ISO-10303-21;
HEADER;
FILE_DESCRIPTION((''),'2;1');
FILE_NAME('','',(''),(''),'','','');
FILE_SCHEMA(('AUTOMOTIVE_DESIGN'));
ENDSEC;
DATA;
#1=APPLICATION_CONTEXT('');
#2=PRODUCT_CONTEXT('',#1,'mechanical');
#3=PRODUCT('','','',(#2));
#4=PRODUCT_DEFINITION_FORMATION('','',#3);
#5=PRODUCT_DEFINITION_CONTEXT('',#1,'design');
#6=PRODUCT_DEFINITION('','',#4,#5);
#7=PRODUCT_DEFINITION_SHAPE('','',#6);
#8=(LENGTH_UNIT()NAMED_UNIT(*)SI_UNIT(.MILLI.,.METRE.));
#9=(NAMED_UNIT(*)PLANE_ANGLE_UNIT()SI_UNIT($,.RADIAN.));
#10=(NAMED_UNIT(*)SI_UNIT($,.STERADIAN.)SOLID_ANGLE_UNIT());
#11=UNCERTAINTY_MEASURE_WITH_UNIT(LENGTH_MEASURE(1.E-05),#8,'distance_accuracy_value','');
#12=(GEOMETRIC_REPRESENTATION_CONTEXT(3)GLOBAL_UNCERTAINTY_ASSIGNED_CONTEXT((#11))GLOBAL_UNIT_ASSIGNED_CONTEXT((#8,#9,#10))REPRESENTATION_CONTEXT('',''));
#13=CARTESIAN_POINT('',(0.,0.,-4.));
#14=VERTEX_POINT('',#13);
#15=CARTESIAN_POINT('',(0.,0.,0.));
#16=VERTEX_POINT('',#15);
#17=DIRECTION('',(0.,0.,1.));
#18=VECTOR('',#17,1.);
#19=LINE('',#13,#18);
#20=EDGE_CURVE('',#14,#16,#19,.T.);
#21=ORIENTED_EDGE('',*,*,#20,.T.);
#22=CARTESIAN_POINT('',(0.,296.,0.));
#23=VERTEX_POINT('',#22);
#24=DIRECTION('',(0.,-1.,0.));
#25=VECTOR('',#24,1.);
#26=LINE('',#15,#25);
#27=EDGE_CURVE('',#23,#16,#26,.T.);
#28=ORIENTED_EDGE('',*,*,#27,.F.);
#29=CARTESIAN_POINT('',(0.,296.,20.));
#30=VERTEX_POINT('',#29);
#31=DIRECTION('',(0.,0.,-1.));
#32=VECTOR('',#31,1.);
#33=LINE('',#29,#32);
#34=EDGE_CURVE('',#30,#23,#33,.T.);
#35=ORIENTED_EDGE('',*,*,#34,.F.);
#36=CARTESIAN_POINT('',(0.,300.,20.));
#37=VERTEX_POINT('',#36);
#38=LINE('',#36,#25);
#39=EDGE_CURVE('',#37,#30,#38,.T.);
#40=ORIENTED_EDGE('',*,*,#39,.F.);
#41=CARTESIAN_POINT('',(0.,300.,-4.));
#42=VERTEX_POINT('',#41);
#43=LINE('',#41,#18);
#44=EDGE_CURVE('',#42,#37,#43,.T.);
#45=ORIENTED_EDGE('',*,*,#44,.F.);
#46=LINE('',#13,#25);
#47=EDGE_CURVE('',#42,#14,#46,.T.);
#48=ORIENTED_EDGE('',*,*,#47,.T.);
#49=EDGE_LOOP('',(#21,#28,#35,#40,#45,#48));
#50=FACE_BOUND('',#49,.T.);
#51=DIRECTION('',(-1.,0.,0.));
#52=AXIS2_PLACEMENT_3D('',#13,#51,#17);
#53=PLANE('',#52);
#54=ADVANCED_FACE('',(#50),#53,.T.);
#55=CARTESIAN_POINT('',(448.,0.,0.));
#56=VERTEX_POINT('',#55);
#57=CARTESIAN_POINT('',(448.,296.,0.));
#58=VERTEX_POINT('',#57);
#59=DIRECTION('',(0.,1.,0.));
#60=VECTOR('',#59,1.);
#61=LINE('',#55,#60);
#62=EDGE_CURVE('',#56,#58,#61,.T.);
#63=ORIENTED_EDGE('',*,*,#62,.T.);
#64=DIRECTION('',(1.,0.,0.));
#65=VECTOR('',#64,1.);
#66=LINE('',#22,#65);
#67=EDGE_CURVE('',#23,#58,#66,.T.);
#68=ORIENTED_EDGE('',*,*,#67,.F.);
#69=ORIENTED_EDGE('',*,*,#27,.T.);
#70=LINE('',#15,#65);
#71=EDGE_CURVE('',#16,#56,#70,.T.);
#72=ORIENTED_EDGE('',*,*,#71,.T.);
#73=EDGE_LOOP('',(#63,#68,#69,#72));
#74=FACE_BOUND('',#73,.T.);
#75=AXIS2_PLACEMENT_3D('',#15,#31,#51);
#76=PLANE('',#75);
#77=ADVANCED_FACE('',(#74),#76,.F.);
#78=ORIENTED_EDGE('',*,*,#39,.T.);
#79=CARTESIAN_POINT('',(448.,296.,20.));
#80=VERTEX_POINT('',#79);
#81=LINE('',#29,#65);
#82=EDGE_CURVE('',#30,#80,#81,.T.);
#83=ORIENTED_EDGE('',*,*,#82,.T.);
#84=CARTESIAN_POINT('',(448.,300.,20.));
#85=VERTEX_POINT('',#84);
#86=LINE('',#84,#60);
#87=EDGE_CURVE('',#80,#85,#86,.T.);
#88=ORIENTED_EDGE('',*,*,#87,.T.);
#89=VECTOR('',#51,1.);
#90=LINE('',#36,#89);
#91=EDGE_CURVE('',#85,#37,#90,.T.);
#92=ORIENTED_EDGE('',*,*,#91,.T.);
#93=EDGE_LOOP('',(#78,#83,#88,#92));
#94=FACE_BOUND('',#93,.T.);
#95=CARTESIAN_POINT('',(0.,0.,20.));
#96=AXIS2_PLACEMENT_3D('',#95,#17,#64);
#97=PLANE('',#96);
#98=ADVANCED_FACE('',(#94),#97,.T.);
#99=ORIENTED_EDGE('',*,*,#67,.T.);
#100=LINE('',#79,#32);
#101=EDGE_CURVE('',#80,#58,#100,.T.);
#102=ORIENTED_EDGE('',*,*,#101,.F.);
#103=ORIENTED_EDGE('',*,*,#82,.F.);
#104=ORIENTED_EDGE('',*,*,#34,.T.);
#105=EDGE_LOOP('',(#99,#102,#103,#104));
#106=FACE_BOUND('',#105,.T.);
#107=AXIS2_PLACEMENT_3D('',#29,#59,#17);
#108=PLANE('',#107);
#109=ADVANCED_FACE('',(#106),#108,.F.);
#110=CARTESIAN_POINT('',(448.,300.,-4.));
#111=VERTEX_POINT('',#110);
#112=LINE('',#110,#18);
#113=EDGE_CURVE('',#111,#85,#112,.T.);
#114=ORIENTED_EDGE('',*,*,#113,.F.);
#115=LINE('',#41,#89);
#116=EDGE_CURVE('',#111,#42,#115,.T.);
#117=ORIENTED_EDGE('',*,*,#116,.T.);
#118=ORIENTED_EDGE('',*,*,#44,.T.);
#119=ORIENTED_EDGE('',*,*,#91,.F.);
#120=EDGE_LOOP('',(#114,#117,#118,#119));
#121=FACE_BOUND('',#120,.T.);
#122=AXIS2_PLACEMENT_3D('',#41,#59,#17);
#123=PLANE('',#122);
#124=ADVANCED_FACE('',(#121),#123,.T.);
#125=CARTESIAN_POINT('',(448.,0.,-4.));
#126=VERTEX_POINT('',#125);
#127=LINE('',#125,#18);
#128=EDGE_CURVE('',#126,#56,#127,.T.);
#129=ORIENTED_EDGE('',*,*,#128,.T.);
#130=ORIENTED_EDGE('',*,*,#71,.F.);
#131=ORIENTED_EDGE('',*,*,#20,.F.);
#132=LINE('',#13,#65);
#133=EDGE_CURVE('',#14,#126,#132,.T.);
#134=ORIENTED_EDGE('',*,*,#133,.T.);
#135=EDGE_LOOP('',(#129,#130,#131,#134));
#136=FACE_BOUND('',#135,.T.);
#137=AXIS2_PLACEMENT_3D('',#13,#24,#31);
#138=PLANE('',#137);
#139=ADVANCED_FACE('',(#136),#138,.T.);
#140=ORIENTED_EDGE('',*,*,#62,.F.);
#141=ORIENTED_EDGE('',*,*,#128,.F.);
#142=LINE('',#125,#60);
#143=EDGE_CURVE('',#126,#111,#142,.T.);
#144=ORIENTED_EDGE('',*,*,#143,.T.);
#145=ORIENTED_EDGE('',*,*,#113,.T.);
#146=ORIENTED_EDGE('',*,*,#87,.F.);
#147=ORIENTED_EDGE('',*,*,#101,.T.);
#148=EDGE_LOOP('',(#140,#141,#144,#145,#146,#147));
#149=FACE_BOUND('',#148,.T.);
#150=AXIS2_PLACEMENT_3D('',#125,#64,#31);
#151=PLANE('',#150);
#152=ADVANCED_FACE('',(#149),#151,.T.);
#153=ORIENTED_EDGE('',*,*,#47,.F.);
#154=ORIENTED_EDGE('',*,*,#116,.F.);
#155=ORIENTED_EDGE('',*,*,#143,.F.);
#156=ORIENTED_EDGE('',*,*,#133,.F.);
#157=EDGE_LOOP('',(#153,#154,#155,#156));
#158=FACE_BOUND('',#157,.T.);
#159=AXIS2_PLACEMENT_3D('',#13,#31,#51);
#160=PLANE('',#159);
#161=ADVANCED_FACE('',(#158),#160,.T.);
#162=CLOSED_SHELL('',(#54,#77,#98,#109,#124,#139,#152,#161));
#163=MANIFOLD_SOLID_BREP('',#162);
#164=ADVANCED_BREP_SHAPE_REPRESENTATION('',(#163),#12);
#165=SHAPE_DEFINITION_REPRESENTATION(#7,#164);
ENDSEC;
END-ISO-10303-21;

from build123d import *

# Parameters (mm, degrees)
SKETCH1_W           = 448
SKETCH1_H           = 300
BASE_FLANGE1_DEPTH  = 4
SKETCH13_W          = 448
SKETCH13_H          = 4
BOSS_EXTRUDE1_DEPTH = 20


# Sheet-metal steps are written as plain solids
with BuildPart() as part:
    # Sketch1 → Base-Flange1 (new body)
    with BuildSketch(Plane.XY):
        with Locations((224, 150)):
            Rectangle(SKETCH1_W, SKETCH1_H)
    extrude(amount=-BASE_FLANGE1_DEPTH)

    # Sketch13 → Boss-Extrude1 (add)
    with BuildSketch(Plane.XY):
        with Locations((224, 298)):
            Rectangle(SKETCH13_W, SKETCH13_H)
    extrude(amount=BOSS_EXTRUDE1_DEPTH)


solid = part.part
